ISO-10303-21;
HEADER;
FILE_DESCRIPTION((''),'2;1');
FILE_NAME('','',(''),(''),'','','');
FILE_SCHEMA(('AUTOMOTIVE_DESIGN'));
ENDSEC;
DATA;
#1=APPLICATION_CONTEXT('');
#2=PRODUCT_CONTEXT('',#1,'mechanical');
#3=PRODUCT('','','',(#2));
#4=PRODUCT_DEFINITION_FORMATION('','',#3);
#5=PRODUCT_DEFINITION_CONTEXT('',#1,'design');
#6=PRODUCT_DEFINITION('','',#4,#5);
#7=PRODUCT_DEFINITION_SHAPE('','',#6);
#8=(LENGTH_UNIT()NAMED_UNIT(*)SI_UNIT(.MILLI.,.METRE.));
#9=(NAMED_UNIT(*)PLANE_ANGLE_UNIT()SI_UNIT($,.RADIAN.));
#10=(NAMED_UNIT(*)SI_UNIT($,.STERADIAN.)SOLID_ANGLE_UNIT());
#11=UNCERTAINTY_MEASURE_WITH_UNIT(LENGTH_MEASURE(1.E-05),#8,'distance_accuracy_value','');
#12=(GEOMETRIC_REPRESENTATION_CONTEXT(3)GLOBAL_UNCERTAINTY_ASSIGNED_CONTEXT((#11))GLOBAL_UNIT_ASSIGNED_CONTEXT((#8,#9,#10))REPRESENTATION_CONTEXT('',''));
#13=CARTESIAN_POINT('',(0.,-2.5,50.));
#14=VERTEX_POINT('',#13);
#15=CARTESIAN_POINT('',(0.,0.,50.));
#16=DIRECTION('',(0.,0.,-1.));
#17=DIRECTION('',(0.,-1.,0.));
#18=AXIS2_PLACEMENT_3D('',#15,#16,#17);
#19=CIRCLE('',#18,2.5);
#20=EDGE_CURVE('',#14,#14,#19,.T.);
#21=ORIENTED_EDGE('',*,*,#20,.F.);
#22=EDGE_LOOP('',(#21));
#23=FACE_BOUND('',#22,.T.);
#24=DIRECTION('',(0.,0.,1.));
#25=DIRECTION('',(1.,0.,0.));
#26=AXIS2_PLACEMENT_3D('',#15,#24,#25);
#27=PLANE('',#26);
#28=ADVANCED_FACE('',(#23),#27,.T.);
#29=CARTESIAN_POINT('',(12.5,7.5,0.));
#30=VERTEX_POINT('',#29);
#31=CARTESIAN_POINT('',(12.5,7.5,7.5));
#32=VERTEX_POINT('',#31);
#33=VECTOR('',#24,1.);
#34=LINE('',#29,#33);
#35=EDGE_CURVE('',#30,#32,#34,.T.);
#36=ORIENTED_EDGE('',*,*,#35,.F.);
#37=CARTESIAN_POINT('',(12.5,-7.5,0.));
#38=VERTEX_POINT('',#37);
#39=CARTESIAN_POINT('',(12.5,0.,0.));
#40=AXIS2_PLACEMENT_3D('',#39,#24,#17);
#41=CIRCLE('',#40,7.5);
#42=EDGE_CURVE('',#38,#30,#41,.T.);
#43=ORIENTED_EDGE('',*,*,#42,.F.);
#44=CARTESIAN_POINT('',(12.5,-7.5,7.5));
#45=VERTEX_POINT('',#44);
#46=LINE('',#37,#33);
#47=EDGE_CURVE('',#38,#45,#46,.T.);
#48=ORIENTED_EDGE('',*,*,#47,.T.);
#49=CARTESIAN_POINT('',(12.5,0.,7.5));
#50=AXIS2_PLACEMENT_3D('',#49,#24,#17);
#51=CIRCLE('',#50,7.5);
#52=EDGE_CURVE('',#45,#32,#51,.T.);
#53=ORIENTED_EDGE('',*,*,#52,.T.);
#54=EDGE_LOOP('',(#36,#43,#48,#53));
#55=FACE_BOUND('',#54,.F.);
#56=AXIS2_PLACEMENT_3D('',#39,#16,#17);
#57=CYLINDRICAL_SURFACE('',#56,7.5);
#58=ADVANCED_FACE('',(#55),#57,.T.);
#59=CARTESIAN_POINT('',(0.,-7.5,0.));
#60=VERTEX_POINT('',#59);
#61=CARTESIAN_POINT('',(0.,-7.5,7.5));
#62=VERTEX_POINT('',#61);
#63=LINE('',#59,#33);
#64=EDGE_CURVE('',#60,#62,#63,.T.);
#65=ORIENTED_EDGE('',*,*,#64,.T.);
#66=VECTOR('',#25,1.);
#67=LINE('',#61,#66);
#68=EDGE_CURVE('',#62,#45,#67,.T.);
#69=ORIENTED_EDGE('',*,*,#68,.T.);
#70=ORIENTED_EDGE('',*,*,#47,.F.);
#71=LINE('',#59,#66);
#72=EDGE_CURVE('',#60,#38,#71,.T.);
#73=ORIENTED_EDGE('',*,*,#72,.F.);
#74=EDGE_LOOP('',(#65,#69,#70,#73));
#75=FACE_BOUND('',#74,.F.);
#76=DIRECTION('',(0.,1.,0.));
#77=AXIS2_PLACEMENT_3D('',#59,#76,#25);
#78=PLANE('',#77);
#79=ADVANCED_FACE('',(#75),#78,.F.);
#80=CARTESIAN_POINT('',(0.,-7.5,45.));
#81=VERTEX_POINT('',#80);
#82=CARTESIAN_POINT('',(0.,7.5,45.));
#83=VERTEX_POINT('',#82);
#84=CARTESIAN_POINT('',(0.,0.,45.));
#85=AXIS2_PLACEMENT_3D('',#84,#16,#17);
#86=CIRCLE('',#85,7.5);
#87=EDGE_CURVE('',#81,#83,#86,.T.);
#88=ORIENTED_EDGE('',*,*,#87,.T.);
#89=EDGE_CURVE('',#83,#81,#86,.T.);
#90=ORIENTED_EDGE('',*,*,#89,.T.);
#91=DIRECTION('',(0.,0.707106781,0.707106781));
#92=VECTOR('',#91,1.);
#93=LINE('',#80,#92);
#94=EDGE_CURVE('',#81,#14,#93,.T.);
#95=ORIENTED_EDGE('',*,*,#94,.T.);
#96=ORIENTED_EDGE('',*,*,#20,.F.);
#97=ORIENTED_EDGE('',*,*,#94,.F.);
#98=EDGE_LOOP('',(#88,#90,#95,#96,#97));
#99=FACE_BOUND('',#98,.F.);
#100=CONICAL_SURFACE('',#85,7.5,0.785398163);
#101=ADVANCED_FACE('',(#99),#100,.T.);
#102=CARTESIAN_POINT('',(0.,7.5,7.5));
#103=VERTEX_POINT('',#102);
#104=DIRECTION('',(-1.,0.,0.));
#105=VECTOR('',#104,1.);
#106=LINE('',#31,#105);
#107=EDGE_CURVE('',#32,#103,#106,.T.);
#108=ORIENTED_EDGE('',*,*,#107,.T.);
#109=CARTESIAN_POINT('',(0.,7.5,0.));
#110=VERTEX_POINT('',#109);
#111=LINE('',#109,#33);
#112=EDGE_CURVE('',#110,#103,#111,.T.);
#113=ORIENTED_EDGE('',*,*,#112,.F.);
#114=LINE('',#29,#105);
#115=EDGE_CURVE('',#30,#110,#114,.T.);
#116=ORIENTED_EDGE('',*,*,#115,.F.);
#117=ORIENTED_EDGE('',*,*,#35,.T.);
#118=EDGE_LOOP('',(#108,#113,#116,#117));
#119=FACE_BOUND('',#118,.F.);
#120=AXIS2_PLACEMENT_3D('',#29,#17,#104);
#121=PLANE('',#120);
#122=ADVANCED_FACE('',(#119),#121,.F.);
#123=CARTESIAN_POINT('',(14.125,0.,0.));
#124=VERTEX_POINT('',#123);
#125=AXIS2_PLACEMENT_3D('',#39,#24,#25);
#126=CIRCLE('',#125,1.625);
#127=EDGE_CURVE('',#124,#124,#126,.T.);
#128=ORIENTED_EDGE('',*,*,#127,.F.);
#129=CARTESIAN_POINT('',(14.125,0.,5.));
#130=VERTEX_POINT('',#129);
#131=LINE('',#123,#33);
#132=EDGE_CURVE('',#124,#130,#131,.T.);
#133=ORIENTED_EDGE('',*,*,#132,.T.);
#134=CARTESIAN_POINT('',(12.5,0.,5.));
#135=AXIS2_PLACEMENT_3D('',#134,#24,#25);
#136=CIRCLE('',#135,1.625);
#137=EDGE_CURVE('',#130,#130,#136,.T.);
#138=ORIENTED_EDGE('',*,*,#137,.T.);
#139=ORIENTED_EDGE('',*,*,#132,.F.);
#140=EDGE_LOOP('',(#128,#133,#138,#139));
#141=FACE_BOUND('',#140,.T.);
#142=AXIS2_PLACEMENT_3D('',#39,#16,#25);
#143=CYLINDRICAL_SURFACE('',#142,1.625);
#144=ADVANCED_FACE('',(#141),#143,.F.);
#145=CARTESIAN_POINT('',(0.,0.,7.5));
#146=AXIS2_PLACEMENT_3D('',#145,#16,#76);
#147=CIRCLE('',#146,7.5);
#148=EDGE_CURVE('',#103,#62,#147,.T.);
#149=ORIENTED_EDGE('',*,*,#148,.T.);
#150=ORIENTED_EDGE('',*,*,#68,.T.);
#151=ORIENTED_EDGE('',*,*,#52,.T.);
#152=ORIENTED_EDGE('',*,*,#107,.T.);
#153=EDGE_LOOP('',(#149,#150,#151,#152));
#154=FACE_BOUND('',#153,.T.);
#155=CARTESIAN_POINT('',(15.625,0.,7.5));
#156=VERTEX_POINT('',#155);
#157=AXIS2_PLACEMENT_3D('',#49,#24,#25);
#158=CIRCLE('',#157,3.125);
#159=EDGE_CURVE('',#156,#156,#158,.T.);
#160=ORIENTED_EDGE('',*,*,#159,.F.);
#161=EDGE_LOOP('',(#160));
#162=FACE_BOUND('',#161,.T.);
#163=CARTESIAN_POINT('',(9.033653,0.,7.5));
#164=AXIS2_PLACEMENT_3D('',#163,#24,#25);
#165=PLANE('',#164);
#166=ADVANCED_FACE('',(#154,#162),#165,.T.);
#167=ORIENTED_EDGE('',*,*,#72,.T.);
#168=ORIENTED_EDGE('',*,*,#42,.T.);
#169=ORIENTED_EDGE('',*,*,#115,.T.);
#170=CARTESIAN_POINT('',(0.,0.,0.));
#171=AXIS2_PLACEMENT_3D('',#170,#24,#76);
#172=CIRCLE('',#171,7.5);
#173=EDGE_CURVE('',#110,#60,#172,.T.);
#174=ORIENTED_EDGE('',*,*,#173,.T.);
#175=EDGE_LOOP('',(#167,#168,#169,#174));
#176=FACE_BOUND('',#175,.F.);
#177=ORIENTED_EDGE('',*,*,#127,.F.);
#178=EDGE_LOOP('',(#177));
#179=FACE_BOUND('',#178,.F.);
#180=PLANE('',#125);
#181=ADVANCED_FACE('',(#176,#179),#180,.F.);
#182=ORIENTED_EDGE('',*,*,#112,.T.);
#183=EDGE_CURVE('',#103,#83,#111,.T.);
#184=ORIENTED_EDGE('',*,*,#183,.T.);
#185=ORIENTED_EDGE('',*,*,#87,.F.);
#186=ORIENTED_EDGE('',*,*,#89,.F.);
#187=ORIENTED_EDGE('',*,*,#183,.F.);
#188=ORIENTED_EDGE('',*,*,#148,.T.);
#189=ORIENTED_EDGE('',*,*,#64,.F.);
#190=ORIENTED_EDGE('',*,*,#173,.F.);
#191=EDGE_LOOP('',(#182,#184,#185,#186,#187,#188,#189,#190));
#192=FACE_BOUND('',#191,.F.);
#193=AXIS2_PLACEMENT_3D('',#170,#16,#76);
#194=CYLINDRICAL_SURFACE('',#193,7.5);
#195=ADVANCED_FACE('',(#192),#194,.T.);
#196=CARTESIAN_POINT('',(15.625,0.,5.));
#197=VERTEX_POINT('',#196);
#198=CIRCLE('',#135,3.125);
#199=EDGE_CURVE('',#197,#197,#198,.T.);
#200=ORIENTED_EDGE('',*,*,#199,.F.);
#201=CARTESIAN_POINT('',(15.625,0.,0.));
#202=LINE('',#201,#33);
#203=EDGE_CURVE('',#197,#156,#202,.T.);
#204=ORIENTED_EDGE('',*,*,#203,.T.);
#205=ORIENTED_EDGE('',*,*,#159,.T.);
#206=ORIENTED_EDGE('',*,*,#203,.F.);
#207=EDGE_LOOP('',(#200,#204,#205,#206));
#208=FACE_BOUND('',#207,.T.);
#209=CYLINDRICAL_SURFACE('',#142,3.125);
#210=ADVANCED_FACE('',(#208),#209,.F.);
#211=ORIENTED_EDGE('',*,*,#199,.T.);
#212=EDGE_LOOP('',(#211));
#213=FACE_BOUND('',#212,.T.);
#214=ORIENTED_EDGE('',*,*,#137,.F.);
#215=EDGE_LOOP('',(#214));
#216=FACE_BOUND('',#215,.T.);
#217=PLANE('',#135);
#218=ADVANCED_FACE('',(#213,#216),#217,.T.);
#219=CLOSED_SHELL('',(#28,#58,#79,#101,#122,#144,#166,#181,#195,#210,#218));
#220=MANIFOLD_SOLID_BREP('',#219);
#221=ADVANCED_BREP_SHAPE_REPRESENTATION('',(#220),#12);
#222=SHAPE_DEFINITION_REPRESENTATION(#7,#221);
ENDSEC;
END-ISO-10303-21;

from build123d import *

# Parameters (mm, degrees)
F1_DEPTH = 50
F0_R     = 3.125
F2_DEPTH = 7.5
F0_R_2   = 1.625
F3_DEPTH = 5


# Not quite as in the source:
# - a fillet or chamfer that OpenCascade refuses, or shapes differently, is made with other operations: its cross-section is extruded or revolved along the edge and cut away or added


with BuildPart() as f1:
    # F0 (on Top) → F1 (new body)
    with BuildSketch(Plane.XY):
        with BuildLine():
            ThreePointArc((0, -7.5), (5.3033008589, -5.3033008589), (7.5, 0))
            ThreePointArc((7.5, 0), (5.3033008589, 5.3033008589), (0, 7.5))
            ThreePointArc((0, 7.5), (-7.5, 0), (0, -7.5))
        make_face()
    extrude(amount=F1_DEPTH)

    # F0 (on Top) → F2 (join)
    with BuildSketch(Plane.XY):
        with BuildLine():
            ThreePointArc((0, 7.5), (5.3033008589, 5.3033008589), (7.5, 0))
            ThreePointArc((7.5, 0), (5.3033008589, -5.3033008589), (0, -7.5))
            Line((0, -7.5), (12.5, -7.5))
            ThreePointArc((12.5, -7.5), (17.8033008589, -5.3033008589), (20, 0))
            ThreePointArc((20, 0), (17.8033008589, 5.3033008589), (12.5, 7.5))
            Line((12.5, 7.5), (0, 7.5))
        make_face()
        with Locations((12.5, 0)):
            Circle(F0_R, mode=Mode.SUBTRACT)
    extrude(amount=F2_DEPTH)

    # F0 (on Top) → F3 (join)
    with BuildSketch(Plane.XY):
        with Locations((12.5, 0)):
            Circle(F0_R)
        with Locations((12.5, 0)):
            Circle(F0_R_2, mode=Mode.SUBTRACT)
    extrude(amount=F3_DEPTH)

    # F4: chamfer of 5 on 1 edges, made by hand

    # F4_s1 → F4_t2 (revolve, cut)
    with BuildSketch(Plane.YZ):
        Polygon((-7.5, 45), (-2.5, 50), (-7.5, 50), align=None)
    revolve(axis=Axis((0, 0, 50), (0, 0, -1)), mode=Mode.SUBTRACT)


solid = f1.part
